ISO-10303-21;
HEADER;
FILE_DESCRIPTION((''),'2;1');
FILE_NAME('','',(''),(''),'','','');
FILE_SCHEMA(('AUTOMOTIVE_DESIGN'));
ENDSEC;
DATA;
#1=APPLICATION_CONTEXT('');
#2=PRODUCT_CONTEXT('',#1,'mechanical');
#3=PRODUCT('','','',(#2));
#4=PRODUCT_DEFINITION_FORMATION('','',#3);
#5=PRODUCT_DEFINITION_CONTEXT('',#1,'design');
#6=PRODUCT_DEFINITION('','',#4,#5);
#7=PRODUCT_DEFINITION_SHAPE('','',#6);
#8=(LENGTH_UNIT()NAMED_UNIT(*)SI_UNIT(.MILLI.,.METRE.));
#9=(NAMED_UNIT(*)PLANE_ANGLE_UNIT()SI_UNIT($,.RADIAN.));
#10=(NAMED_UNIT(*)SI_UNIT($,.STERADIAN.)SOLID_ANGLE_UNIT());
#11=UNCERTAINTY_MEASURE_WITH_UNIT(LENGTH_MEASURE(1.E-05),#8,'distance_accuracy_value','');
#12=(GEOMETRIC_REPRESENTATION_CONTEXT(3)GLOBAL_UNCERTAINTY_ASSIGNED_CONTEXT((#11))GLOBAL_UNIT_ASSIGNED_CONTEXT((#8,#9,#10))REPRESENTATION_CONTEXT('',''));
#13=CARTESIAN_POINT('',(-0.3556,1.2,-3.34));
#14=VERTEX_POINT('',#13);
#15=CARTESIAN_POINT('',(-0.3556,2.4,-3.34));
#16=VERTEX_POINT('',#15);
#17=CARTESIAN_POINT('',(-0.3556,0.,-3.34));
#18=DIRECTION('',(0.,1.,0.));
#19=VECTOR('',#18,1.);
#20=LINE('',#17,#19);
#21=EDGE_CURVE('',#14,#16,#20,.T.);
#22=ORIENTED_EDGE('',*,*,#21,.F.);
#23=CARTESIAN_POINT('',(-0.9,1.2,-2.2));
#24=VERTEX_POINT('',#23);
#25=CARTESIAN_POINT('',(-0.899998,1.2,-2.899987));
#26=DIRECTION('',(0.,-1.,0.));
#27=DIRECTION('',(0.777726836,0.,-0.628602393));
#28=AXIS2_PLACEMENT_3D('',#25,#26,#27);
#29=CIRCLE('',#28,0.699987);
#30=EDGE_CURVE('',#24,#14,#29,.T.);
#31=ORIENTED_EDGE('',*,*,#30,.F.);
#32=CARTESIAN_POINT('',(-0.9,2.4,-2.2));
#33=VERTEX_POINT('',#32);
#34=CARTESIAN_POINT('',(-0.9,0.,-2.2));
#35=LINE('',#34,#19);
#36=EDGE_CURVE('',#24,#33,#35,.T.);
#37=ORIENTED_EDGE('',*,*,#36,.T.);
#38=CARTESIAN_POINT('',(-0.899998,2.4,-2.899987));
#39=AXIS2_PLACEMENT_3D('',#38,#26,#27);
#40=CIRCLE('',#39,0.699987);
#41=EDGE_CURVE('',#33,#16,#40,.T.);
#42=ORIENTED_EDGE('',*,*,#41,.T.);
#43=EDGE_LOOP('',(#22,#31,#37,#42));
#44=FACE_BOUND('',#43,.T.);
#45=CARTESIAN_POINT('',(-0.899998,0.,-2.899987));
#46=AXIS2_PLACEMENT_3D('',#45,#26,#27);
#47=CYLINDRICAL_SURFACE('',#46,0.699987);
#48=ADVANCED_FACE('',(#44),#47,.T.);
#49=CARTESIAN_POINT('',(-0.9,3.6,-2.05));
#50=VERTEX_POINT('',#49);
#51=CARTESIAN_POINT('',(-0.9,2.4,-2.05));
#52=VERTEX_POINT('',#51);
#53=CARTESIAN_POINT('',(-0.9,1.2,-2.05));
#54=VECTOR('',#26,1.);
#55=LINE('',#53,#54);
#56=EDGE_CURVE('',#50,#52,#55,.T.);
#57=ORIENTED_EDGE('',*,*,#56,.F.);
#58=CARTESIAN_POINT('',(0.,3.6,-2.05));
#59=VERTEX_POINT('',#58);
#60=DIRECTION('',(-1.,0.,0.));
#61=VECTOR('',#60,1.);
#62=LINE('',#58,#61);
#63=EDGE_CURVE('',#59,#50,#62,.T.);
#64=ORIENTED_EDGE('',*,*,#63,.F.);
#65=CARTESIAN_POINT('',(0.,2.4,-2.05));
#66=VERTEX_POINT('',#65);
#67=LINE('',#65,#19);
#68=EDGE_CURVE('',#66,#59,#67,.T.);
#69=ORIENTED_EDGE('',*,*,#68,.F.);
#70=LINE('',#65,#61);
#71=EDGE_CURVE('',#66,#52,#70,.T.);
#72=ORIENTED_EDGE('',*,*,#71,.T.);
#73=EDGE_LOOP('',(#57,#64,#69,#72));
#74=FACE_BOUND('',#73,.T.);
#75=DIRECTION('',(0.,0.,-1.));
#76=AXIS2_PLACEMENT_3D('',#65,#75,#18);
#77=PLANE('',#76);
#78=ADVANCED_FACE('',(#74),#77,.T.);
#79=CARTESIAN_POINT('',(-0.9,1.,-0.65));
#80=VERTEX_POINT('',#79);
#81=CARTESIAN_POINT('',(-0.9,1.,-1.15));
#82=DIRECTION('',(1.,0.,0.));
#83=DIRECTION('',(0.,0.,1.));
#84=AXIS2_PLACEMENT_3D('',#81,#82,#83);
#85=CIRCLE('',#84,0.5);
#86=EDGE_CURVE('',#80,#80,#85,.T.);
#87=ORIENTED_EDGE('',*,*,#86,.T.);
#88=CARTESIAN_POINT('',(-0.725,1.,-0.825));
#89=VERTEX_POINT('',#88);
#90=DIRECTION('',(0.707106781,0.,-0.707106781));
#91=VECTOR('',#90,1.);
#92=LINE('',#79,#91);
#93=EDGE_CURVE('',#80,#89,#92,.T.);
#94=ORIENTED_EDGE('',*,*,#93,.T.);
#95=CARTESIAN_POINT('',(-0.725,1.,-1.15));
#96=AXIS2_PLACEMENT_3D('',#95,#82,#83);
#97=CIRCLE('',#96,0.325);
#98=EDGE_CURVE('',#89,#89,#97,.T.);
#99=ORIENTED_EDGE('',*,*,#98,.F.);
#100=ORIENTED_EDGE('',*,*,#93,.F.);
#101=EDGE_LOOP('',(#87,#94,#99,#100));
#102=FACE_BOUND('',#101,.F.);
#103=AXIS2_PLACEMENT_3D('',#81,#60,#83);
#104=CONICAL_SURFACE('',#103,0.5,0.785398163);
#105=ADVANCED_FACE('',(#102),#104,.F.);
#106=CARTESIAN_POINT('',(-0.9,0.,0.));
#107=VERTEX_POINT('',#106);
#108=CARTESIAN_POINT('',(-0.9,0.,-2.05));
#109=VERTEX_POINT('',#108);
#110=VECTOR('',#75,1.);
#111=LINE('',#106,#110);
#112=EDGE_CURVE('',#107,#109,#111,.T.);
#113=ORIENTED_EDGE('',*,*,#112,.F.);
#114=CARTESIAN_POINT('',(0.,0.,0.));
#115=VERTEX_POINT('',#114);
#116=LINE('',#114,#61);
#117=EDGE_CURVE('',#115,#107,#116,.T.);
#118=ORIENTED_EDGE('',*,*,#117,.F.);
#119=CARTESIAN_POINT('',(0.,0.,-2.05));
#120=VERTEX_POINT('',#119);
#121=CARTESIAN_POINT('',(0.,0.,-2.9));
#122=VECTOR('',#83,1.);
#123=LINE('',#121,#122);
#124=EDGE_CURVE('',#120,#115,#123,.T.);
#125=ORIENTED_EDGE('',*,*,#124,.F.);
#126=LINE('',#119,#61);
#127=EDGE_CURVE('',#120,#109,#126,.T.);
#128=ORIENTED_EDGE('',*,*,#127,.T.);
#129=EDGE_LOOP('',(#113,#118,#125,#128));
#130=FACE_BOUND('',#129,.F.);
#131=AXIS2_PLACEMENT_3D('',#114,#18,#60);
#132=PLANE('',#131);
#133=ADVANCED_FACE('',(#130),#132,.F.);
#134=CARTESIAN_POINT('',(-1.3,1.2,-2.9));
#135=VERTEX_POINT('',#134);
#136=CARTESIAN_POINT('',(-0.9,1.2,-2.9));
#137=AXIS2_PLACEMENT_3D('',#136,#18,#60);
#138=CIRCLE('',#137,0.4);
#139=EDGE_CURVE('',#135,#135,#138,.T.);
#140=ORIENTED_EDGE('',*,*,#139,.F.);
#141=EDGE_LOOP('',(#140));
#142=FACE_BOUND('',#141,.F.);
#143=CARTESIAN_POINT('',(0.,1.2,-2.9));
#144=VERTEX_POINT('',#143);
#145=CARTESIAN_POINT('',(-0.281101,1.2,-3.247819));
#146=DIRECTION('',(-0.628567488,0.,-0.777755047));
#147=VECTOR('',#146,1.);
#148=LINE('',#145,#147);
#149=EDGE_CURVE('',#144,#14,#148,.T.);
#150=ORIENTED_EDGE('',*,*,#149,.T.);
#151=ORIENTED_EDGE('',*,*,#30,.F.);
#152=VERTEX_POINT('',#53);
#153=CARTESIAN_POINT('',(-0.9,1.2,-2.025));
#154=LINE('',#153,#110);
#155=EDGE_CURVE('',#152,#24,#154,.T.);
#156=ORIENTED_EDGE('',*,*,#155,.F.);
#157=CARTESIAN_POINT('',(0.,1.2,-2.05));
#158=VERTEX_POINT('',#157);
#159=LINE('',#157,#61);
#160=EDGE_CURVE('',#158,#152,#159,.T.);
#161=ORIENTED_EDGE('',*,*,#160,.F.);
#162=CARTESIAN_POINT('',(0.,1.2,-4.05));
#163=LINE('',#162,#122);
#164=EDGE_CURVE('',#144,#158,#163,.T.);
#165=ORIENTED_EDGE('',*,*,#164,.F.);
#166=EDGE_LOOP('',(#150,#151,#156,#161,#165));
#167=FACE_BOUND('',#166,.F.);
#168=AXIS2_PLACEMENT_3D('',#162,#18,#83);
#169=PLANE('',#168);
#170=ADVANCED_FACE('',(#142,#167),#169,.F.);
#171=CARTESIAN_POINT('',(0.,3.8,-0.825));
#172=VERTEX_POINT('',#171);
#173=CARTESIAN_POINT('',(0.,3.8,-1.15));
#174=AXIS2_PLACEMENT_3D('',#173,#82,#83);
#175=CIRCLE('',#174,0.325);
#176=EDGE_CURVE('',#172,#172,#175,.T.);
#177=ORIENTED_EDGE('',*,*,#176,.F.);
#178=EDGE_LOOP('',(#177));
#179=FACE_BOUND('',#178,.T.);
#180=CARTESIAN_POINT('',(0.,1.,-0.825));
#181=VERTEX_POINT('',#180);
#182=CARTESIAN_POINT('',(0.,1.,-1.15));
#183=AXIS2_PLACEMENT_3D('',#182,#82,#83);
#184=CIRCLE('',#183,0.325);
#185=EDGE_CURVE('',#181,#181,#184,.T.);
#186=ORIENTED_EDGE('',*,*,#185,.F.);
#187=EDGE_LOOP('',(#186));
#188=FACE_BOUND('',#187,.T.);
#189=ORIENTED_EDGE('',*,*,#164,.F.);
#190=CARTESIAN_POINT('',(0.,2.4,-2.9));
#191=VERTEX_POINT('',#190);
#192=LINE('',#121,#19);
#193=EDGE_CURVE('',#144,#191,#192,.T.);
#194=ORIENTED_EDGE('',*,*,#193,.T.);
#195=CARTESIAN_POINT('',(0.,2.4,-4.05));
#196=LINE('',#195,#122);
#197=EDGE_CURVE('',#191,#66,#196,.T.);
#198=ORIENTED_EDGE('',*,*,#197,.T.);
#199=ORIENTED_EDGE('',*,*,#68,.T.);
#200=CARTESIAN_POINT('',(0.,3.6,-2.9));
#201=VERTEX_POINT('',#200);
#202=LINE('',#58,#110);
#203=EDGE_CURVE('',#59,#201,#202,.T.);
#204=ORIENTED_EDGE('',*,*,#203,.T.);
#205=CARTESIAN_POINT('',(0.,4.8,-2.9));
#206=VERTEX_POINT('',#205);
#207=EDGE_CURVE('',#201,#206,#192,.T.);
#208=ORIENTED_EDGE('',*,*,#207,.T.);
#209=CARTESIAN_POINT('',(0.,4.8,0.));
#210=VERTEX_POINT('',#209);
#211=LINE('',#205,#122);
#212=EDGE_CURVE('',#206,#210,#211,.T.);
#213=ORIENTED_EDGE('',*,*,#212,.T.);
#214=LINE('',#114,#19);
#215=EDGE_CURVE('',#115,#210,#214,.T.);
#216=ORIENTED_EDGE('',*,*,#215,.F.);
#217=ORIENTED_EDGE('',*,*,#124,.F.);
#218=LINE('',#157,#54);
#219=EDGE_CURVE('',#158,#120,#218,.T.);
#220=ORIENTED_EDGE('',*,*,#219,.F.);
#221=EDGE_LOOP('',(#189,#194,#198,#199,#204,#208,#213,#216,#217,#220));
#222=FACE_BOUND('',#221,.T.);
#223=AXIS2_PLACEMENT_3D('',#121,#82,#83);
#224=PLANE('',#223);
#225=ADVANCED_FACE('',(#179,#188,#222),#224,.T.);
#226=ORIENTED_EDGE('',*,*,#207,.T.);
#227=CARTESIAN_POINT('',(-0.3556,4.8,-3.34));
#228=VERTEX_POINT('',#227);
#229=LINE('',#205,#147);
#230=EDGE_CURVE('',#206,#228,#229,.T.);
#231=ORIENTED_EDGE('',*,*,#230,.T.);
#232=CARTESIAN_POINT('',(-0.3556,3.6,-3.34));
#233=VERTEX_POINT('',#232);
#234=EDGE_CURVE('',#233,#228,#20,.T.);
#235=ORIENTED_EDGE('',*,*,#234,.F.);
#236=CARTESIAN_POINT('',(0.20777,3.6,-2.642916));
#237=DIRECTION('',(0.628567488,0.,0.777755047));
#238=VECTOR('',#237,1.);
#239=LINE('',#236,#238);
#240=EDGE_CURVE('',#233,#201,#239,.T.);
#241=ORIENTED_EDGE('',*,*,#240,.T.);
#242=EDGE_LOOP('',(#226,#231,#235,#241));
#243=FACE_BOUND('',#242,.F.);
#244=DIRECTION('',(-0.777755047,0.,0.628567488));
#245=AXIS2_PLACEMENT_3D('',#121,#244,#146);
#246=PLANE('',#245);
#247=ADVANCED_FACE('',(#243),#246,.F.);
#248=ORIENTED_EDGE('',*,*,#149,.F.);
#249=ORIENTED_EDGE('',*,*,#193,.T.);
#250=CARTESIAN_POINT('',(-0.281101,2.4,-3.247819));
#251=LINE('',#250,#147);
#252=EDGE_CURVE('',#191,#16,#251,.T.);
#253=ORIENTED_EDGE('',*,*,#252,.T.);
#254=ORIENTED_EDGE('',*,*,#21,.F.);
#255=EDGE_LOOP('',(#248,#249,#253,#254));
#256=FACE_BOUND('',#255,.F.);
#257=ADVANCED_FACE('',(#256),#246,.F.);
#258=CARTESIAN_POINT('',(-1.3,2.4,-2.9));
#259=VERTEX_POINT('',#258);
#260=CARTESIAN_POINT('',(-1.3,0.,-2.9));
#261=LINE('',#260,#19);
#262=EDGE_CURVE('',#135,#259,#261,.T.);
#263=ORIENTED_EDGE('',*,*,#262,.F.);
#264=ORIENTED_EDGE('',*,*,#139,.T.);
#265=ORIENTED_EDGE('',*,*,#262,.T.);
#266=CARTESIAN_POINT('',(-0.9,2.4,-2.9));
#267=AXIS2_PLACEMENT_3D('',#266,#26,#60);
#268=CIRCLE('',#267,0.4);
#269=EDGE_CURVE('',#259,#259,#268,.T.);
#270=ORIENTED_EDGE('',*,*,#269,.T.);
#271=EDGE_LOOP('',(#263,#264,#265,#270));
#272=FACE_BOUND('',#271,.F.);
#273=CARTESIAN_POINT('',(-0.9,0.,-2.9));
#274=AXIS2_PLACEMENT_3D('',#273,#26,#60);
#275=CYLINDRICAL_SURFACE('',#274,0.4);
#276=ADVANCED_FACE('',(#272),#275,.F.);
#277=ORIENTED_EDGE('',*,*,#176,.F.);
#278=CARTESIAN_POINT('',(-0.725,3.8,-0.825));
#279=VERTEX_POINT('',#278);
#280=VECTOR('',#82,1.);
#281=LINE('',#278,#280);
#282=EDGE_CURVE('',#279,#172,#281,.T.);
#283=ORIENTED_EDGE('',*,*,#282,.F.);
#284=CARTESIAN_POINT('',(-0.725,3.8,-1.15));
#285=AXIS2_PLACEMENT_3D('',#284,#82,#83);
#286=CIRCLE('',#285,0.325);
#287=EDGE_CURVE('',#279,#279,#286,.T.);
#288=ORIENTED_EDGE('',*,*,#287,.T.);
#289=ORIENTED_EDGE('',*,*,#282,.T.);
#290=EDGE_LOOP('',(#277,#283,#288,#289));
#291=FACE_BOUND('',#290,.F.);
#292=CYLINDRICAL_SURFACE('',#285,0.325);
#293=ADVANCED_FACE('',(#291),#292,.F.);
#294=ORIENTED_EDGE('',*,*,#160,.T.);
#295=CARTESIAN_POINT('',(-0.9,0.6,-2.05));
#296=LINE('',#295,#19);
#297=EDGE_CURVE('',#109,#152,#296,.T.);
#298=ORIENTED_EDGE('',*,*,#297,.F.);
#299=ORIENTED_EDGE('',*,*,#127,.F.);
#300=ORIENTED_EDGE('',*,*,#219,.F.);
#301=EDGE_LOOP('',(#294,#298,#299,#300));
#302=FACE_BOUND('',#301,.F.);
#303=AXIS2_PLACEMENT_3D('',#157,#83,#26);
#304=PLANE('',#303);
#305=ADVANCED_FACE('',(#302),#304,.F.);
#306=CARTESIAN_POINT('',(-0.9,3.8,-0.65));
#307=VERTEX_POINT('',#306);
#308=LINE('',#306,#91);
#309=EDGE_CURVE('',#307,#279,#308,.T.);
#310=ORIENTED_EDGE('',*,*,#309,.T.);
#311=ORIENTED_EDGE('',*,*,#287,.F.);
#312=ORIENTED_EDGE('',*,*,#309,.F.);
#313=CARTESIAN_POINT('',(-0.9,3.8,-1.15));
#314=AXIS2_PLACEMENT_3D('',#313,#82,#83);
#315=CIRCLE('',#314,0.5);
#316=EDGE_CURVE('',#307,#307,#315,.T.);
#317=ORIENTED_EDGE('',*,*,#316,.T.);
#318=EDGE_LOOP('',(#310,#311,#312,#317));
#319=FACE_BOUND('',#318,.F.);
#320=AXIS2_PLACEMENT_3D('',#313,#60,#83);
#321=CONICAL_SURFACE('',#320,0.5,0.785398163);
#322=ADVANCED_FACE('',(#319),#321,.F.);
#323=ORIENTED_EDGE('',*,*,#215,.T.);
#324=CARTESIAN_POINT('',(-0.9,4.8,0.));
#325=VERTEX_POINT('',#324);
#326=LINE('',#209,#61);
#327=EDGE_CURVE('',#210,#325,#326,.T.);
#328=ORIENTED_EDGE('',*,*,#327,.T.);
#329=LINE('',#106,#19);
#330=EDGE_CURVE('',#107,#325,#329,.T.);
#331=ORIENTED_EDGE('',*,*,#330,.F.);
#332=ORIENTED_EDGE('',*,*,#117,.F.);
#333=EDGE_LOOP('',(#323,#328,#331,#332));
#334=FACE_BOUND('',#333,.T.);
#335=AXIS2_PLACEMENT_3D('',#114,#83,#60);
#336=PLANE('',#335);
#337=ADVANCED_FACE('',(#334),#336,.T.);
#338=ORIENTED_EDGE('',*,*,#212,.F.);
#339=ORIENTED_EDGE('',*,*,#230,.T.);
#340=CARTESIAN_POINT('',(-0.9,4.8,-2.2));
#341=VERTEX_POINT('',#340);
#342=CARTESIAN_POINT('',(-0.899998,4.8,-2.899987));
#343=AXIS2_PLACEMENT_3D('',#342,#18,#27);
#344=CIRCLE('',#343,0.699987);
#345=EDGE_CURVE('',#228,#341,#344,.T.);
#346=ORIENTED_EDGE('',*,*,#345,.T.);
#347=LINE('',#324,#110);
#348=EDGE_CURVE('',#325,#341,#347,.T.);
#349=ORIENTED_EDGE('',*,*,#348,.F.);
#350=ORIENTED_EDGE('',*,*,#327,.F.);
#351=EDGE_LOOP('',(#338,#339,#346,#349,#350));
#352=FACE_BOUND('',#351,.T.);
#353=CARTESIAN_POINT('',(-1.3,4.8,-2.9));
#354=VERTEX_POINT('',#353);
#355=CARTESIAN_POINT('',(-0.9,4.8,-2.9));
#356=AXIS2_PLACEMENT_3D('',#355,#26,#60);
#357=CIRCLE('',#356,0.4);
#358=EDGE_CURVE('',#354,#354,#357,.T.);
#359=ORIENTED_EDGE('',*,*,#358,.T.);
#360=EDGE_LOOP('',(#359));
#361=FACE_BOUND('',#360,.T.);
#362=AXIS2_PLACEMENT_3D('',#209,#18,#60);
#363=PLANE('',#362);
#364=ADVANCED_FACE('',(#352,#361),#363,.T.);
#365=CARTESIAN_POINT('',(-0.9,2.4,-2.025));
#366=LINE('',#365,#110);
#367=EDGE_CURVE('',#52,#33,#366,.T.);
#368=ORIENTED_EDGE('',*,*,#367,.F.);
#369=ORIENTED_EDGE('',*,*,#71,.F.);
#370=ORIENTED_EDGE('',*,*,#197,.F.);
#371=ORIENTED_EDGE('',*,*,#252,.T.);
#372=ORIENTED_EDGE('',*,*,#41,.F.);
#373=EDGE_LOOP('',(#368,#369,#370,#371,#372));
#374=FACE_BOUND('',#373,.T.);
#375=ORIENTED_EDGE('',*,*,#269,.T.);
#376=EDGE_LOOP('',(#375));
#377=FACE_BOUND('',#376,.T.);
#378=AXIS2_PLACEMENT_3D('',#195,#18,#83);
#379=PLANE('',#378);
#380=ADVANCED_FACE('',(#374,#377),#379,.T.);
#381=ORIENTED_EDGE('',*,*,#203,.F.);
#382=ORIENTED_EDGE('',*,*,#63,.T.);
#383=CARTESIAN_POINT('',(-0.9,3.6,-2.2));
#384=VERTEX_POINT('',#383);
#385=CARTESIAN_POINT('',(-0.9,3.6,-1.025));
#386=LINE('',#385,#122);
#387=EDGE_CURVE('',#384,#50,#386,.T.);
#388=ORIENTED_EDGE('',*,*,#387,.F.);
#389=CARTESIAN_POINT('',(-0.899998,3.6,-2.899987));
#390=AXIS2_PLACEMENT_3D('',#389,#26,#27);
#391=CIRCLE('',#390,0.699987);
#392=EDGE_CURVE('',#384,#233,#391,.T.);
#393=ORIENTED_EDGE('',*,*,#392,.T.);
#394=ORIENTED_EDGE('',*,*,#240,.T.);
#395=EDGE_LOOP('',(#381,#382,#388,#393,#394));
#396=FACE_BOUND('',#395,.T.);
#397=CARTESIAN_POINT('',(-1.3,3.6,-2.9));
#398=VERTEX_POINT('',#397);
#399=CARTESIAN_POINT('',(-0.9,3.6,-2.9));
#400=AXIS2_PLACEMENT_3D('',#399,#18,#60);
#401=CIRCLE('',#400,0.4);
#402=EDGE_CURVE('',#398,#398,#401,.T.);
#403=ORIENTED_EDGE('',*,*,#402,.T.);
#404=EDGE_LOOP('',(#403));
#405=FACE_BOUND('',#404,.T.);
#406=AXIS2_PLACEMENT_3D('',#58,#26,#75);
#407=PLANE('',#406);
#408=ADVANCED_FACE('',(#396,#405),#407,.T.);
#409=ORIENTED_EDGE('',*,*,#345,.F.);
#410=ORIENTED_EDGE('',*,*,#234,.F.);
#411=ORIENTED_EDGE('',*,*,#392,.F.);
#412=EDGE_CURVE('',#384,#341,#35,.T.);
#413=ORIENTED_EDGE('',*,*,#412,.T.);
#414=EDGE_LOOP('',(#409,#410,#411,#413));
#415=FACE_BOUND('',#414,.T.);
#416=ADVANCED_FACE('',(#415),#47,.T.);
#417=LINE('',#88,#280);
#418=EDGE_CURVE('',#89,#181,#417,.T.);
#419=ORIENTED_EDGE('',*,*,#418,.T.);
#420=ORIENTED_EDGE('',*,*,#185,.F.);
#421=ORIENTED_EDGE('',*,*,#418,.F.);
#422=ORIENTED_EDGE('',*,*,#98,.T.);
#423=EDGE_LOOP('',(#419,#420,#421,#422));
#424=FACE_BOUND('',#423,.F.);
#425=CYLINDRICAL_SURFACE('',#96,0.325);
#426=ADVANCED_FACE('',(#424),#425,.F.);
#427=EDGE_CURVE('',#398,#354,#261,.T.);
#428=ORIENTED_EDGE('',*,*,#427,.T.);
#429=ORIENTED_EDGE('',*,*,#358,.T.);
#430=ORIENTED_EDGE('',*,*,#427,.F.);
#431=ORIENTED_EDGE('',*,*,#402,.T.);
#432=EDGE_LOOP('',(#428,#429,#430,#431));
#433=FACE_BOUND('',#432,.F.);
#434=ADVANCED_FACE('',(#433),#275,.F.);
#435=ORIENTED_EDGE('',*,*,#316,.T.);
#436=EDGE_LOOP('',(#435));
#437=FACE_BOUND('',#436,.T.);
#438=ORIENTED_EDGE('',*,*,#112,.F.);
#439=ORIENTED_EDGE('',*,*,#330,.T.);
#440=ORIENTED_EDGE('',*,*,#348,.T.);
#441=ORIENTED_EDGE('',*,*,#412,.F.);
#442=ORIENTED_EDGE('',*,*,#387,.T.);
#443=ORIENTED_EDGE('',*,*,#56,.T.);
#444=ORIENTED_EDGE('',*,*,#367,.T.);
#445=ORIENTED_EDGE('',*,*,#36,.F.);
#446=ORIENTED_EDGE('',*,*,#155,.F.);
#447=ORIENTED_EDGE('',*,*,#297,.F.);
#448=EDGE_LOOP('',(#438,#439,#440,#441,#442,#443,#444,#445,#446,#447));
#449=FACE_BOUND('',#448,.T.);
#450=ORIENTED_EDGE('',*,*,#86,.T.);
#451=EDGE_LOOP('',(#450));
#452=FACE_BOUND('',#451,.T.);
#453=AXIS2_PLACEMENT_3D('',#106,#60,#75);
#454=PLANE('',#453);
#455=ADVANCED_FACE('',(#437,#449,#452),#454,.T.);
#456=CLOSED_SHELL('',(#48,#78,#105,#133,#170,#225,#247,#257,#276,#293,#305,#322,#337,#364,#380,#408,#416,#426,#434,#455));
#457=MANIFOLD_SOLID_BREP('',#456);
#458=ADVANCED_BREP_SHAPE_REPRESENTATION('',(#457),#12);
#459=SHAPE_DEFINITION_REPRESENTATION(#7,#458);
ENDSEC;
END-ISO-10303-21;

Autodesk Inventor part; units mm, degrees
ref_plane "YZ Plane" through (0, 0, 0) normal (1, 0, 0) x (0, 1, 0)
ref_plane "XZ Plane" through (0, 0, 0) normal (0, 1, 0) x (-1, 0, 0)
ref_plane "XY Plane" through (0, 0, 0) normal (0, 0, 1) x (1, 0, 0)
sketch "Skizze1" plane through (0, 0, 0) normal (0, 1, 0) x (-1, 0, 0)
  line L0 (0, 0) -> (0.9, 0)
  line L1 (0.9, 0) -> (0.9, -2.9)
  line L2 (0.9, -2.9) -> (0, -2.9) construction
  line L3 (0, -2.9) -> (0, 0)
  circle A0 centre (0.9, -2.9) radius 0.4
  arc A1 (0.3556, -3.34) -> (0.9, -2.2) centre (0.9, -2.9) ccw
  line L4 (0, -2.9) -> (0.3556, -3.34)
  dimension "d0" = 0.9
  dimension "d2" = 0.8
  dimension "d3" = 1.4
  dimension "d4" = 2.9
extrude "Extrusion1" add sketch "Skizze1" along normal blind 4.8
sketch "Skizze2" plane through (0, 0, 0) normal (1, 0, 0) x (0, 0, -1)
  line L0 (2.9, 0) -> (0, 0) construction
  line L1 (2.9, 0) -> (2.9, 4.8) construction
  line L2 (0, 4.8) -> (2.9, 4.8) construction
  line L3 (0, 0) -> (0, 4.8) construction
  line L4 (0, 4.8) -> (2.9, 4.8) construction
  line L5 (2.05, 4.8) -> (2.05, 0) construction
  line L6 (2.05, 0) -> (4.05, 0)
  line L7 (4.05, 0) -> (4.05, 1.2)
  line L8 (4.05, 1.2) -> (2.05, 1.2)
  line L9 (2.05, 1.2) -> (2.05, 0)
  line L10 (2.05, 3.6) -> (4.05, 3.6)
  line L11 (4.05, 3.6) -> (4.05, 2.4)
  line L12 (4.05, 2.4) -> (2.05, 2.4)
  line L13 (2.05, 2.4) -> (2.05, 3.6)
  dimension "d7" = 0.85
  dimension "d8" = 2
  dimension "d9" = 1.2
  dimension "d10" = 1.2
  dimension "d11" = 1.2
extrude "Extrusion2" cut sketch "Skizze2" against normal blind 4
sketch "Skizze4" plane through (-0.9, 0, 0) normal (-1, 0, 0) x (0, 0, 1)
  line L0 (-2.05, 1.2) -> (-2.05, 0) construction
  line L1 (0, 0) -> (-2.05, 0) construction
  line L2 (0, 0) -> (0, 4.8) construction
  line L3 (-2.2, 4.8) -> (0, 4.8) construction
  line L4 (-2.2, 3.6) -> (-2.2, 4.8) construction
  line L5 (-2.2, 3.6) -> (-2.05, 3.6) construction
  line L6 (-2.05, 3.6) -> (-2.05, 2.4) construction
  line L7 (-2.05, 2.4) -> (-2.2, 2.4) construction
  line L8 (-2.2, 1.2) -> (-2.2, 2.4) construction
  line L9 (-2.2, 1.2) -> (-2.05, 1.2) construction
  line L10 (0, 0) -> (0, 4.8) construction
  line L11 (-1.15, 3.8) -> (-1.15, 1) construction
  line L12 (0, 2.4) -> (-2.05, 2.4) construction
  point P0 (-1.15, 2.4)
  dimension "d30" = 2.8
  dimension "d31" = 1.15
hole "Bohrung2" at (-0.9, 3.8, -1.15) at (-0.9, 1, -1.15) direction (1, 0, 0) diameter 0.65 end through all countersink diameter 1 countersink angle 90
properties part number "item_scharnier_2_teil"
